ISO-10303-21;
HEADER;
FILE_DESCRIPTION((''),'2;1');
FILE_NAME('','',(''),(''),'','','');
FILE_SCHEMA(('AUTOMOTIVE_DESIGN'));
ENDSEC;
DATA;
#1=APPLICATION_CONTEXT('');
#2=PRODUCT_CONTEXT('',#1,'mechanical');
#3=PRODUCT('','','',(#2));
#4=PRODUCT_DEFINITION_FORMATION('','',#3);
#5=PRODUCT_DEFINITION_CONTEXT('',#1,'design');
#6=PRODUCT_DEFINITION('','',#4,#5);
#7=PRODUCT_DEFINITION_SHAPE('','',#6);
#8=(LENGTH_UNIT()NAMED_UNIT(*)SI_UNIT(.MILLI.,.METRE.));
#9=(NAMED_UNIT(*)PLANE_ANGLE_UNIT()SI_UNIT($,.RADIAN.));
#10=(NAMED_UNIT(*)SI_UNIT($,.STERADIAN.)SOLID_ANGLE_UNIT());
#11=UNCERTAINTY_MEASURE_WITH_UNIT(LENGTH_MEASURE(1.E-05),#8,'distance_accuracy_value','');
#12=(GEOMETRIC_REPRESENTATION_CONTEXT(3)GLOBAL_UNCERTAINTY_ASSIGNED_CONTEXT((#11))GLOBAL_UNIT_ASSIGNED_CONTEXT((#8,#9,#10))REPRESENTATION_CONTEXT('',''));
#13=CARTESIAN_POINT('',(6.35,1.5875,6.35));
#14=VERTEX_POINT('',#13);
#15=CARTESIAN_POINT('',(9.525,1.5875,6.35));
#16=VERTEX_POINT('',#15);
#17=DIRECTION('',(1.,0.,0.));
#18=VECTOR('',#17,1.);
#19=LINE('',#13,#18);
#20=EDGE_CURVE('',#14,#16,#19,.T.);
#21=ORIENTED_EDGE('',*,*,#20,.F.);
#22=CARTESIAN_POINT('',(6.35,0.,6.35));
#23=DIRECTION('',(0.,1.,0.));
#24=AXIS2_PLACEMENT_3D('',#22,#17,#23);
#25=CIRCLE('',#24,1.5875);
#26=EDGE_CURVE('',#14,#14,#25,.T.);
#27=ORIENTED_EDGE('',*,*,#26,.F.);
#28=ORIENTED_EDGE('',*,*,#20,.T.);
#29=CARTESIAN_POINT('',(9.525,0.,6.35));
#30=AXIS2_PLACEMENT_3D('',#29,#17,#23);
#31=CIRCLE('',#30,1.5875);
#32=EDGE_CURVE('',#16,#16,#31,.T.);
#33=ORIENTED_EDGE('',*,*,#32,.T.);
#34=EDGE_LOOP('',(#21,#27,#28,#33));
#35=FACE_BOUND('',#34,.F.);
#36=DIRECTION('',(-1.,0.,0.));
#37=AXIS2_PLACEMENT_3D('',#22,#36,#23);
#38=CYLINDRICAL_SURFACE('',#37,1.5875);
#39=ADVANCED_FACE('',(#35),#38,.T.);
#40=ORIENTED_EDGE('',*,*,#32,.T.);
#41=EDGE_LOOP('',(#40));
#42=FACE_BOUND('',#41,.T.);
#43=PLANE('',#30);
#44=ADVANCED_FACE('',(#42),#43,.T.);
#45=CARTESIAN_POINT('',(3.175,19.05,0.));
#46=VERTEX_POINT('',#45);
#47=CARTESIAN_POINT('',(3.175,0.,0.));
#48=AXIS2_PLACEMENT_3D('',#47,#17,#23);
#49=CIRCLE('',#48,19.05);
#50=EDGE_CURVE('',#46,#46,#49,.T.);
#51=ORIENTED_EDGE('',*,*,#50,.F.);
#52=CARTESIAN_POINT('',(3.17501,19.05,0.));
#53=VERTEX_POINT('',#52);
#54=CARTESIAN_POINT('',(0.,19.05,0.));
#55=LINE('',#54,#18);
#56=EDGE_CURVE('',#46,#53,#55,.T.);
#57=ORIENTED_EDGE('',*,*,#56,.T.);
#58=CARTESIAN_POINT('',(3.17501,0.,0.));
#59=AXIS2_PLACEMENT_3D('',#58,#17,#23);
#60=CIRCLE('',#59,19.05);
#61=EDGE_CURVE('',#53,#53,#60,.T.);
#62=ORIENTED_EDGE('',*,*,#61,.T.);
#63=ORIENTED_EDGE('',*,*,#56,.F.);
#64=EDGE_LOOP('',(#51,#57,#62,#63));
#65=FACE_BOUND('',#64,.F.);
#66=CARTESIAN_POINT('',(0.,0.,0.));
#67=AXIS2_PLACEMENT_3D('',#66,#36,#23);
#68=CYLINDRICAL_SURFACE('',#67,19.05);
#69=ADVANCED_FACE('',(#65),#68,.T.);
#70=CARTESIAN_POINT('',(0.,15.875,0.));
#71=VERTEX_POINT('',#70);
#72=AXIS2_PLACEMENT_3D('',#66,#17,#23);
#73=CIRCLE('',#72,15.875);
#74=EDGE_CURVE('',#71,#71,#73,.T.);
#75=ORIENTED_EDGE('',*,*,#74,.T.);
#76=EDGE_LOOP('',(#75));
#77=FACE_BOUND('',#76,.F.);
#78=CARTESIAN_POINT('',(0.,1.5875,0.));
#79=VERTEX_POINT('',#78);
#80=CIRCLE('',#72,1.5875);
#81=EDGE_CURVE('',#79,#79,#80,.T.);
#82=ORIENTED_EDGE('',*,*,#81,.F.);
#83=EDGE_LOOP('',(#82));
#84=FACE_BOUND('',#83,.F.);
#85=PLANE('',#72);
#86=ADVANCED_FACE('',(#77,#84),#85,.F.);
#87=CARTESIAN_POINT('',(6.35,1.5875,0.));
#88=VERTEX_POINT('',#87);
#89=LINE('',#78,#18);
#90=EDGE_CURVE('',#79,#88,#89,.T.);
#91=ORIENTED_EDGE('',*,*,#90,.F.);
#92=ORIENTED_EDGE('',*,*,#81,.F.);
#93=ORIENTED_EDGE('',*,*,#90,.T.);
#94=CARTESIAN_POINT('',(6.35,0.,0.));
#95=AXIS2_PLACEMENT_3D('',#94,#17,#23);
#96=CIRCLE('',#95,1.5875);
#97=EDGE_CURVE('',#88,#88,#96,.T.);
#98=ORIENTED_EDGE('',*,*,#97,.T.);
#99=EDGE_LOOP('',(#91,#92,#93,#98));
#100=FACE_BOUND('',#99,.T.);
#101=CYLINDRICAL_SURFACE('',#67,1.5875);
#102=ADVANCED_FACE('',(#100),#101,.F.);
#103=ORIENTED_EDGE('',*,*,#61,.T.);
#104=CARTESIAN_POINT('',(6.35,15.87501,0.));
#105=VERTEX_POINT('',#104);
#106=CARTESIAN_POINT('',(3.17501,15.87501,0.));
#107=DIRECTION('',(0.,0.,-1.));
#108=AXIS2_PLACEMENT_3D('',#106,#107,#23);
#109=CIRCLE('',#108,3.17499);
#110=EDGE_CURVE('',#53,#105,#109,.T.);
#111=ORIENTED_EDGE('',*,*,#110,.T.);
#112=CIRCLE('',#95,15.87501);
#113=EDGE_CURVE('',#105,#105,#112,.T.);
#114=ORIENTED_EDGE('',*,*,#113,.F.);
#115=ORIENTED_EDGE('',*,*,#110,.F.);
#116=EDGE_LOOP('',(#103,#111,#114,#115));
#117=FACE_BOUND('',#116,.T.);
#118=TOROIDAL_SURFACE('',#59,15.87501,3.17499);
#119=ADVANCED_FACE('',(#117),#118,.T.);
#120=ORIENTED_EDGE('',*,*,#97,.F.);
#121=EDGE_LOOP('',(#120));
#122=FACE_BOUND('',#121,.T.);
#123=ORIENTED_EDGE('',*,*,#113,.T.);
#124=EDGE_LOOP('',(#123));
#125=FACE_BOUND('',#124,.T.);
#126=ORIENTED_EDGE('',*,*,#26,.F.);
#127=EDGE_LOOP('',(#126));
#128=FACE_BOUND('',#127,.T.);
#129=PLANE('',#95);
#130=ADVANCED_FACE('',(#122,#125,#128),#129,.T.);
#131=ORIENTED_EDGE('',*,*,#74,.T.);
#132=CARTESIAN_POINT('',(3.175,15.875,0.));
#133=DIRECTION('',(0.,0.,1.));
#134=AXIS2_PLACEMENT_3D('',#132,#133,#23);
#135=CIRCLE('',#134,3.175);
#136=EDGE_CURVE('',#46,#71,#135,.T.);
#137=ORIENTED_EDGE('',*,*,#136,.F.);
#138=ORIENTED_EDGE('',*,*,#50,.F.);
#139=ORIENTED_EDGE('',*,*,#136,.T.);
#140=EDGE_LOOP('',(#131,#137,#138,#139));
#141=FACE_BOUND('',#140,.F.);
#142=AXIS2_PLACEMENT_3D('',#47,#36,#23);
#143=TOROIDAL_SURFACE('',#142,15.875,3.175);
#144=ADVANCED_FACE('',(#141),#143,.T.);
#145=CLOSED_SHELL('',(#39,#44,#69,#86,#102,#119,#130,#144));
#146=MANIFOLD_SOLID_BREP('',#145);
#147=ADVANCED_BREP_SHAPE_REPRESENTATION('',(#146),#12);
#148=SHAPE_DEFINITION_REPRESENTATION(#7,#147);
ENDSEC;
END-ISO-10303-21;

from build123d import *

# Parameters (mm, degrees)
F0_R     = 19.05
F3_DEPTH = 6.35
F2_R     = 1.5875
F4_DEPTH = 6.35
F5_R     = 3.175
F6_R     = 3.17499
F7_R     = 1.5875
F8_DEPTH = 3.175


# Not quite as in the source:
# - a fillet or chamfer is up to 0.001 mm smaller than in the source, because OpenCascade refuses the exact size


with BuildPart() as f3:
    # F0 (on Right) → F3 (new body)
    with BuildSketch(Plane.YZ):
        Circle(F0_R)
    extrude(amount=F3_DEPTH)

    # F2 (on face) → F4 (cut)
    with BuildSketch(Plane.YZ):
        Circle(F2_R)
    extrude(amount=F4_DEPTH, mode=Mode.SUBTRACT)

    # F5
    f5_edges = [f3.edges().sort_by_distance(p)[0] for p in [
        (0, -19.05, 0),
    ]]
    fillet(f5_edges, radius=F5_R)

    # F6 (radius 3.175 in the source; OpenCascade refuses exactly that, so slightly less here)
    f6_edges = [f3.edges().sort_by_distance(p)[0] for p in [
        (6.35, -19.05, 0),
    ]]
    fillet(f6_edges, radius=F6_R)

    # F7 (on face) → F8 (join)
    with BuildSketch(Plane.YZ.offset(6.35)):
        with Locations((0, 6.35)):
            Circle(F7_R)
    extrude(amount=F8_DEPTH)


solid = f3.part
